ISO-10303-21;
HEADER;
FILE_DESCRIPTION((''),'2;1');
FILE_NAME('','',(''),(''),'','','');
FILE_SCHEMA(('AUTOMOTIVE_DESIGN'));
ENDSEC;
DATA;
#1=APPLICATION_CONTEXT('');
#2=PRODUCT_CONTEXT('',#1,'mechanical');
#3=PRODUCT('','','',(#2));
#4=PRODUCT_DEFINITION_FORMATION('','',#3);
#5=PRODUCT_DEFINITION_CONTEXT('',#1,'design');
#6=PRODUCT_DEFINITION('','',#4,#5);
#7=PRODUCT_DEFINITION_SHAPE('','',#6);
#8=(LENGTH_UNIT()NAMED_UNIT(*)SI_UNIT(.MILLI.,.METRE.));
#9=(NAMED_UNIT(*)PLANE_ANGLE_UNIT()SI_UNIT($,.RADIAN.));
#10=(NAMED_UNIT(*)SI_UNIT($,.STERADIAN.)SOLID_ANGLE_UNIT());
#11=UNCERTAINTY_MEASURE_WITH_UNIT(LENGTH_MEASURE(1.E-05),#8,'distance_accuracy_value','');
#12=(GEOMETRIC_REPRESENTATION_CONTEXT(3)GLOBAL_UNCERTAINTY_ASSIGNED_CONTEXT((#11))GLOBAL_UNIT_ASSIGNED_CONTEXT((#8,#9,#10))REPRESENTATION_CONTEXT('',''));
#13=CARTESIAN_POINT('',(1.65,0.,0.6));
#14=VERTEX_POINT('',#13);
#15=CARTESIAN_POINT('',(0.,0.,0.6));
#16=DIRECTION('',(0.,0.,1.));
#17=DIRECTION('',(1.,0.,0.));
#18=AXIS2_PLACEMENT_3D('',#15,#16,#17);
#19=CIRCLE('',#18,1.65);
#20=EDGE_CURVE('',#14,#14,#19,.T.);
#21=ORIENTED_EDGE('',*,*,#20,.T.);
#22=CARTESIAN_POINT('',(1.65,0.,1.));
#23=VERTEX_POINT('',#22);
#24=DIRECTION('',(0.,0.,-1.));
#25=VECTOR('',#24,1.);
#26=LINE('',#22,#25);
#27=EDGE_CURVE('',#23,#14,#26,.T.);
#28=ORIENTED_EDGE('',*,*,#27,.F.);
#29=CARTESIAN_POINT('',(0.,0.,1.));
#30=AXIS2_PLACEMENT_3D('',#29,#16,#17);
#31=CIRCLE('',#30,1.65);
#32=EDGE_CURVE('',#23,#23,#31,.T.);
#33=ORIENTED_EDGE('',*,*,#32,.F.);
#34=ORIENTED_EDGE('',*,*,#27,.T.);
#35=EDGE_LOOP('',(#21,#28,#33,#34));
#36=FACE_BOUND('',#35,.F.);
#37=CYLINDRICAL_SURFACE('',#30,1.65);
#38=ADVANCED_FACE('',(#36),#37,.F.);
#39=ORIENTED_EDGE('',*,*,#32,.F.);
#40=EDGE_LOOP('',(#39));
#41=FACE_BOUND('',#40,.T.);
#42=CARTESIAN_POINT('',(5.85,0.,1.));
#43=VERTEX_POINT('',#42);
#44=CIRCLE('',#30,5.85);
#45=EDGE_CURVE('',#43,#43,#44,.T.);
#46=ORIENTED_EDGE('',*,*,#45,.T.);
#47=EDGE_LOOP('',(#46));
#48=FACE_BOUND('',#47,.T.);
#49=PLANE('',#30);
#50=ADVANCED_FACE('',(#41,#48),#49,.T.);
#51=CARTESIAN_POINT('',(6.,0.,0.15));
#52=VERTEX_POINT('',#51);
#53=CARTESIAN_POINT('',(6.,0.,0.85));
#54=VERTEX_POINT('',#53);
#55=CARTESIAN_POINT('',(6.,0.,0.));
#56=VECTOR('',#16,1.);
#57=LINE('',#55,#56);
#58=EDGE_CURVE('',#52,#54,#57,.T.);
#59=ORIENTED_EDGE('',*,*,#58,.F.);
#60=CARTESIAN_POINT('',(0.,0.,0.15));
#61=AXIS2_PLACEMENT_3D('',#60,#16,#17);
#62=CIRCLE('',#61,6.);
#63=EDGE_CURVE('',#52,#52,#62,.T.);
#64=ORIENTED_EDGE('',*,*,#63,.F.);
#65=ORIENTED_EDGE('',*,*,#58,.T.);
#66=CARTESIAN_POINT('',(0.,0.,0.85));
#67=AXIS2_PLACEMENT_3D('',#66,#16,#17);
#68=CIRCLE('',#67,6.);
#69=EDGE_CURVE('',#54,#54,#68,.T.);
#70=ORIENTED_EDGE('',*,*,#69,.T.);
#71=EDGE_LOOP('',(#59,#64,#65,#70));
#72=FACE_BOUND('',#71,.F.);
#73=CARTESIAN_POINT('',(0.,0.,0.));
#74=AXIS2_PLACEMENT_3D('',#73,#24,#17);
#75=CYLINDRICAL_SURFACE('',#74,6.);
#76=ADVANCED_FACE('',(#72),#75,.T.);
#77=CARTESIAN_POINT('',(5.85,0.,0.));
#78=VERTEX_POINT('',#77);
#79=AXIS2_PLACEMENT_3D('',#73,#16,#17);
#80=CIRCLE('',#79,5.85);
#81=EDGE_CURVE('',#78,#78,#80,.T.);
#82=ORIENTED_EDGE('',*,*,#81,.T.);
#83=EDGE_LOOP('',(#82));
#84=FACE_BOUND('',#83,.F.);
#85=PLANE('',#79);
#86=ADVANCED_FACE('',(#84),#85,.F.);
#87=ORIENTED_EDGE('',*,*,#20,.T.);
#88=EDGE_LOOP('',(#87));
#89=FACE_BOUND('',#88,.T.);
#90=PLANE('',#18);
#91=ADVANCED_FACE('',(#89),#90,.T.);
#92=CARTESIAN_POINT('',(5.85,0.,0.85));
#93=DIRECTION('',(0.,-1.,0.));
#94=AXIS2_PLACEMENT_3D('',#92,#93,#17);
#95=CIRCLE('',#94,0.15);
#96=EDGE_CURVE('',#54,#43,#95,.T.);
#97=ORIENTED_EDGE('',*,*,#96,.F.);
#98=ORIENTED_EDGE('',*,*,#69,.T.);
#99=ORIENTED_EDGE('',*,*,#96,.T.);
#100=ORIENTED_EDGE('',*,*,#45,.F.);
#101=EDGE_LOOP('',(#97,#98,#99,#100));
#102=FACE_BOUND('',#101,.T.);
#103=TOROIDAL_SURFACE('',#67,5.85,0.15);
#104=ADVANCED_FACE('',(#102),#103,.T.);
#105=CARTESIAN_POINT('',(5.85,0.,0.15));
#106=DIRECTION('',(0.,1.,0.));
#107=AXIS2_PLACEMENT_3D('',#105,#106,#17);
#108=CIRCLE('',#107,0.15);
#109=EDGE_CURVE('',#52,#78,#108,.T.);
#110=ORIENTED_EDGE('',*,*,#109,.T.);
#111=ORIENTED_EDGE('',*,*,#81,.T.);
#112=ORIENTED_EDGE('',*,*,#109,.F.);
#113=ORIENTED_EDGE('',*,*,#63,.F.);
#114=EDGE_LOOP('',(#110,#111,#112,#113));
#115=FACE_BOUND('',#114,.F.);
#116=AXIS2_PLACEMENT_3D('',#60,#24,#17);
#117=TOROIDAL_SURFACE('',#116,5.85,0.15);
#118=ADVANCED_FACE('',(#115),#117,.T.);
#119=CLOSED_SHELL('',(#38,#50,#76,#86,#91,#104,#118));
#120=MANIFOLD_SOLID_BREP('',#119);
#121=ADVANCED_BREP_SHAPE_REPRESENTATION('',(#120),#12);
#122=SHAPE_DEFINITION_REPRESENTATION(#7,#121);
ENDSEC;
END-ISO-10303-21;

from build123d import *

# Parameters (mm, degrees)
F0_R     = 6
F1_DEPTH = 1
F2_R     = 0.15
F3_R     = 1.65
F4_DEPTH = 0.4


# Not quite as in the source:
# - a feature names something its author has since deleted; it is built from what else it names


with BuildPart() as f1:
    # F0 (on Top) → F1 (new body)
    with BuildSketch(Plane.XY):
        Circle(F0_R)
    extrude(amount=F1_DEPTH)

    # F2
    f2_edges = [f1.edges().sort_by_distance(p)[0] for p in [
        (-6, 0, 1),
        (-6, 0, 0),
    ]]
    fillet(f2_edges, radius=F2_R)

    # F3 (on face) → F4 (cut)
    with BuildSketch(Plane.XY.offset(1)):
        Circle(F3_R)
    extrude(amount=-F4_DEPTH, mode=Mode.SUBTRACT)


solid = f1.part
